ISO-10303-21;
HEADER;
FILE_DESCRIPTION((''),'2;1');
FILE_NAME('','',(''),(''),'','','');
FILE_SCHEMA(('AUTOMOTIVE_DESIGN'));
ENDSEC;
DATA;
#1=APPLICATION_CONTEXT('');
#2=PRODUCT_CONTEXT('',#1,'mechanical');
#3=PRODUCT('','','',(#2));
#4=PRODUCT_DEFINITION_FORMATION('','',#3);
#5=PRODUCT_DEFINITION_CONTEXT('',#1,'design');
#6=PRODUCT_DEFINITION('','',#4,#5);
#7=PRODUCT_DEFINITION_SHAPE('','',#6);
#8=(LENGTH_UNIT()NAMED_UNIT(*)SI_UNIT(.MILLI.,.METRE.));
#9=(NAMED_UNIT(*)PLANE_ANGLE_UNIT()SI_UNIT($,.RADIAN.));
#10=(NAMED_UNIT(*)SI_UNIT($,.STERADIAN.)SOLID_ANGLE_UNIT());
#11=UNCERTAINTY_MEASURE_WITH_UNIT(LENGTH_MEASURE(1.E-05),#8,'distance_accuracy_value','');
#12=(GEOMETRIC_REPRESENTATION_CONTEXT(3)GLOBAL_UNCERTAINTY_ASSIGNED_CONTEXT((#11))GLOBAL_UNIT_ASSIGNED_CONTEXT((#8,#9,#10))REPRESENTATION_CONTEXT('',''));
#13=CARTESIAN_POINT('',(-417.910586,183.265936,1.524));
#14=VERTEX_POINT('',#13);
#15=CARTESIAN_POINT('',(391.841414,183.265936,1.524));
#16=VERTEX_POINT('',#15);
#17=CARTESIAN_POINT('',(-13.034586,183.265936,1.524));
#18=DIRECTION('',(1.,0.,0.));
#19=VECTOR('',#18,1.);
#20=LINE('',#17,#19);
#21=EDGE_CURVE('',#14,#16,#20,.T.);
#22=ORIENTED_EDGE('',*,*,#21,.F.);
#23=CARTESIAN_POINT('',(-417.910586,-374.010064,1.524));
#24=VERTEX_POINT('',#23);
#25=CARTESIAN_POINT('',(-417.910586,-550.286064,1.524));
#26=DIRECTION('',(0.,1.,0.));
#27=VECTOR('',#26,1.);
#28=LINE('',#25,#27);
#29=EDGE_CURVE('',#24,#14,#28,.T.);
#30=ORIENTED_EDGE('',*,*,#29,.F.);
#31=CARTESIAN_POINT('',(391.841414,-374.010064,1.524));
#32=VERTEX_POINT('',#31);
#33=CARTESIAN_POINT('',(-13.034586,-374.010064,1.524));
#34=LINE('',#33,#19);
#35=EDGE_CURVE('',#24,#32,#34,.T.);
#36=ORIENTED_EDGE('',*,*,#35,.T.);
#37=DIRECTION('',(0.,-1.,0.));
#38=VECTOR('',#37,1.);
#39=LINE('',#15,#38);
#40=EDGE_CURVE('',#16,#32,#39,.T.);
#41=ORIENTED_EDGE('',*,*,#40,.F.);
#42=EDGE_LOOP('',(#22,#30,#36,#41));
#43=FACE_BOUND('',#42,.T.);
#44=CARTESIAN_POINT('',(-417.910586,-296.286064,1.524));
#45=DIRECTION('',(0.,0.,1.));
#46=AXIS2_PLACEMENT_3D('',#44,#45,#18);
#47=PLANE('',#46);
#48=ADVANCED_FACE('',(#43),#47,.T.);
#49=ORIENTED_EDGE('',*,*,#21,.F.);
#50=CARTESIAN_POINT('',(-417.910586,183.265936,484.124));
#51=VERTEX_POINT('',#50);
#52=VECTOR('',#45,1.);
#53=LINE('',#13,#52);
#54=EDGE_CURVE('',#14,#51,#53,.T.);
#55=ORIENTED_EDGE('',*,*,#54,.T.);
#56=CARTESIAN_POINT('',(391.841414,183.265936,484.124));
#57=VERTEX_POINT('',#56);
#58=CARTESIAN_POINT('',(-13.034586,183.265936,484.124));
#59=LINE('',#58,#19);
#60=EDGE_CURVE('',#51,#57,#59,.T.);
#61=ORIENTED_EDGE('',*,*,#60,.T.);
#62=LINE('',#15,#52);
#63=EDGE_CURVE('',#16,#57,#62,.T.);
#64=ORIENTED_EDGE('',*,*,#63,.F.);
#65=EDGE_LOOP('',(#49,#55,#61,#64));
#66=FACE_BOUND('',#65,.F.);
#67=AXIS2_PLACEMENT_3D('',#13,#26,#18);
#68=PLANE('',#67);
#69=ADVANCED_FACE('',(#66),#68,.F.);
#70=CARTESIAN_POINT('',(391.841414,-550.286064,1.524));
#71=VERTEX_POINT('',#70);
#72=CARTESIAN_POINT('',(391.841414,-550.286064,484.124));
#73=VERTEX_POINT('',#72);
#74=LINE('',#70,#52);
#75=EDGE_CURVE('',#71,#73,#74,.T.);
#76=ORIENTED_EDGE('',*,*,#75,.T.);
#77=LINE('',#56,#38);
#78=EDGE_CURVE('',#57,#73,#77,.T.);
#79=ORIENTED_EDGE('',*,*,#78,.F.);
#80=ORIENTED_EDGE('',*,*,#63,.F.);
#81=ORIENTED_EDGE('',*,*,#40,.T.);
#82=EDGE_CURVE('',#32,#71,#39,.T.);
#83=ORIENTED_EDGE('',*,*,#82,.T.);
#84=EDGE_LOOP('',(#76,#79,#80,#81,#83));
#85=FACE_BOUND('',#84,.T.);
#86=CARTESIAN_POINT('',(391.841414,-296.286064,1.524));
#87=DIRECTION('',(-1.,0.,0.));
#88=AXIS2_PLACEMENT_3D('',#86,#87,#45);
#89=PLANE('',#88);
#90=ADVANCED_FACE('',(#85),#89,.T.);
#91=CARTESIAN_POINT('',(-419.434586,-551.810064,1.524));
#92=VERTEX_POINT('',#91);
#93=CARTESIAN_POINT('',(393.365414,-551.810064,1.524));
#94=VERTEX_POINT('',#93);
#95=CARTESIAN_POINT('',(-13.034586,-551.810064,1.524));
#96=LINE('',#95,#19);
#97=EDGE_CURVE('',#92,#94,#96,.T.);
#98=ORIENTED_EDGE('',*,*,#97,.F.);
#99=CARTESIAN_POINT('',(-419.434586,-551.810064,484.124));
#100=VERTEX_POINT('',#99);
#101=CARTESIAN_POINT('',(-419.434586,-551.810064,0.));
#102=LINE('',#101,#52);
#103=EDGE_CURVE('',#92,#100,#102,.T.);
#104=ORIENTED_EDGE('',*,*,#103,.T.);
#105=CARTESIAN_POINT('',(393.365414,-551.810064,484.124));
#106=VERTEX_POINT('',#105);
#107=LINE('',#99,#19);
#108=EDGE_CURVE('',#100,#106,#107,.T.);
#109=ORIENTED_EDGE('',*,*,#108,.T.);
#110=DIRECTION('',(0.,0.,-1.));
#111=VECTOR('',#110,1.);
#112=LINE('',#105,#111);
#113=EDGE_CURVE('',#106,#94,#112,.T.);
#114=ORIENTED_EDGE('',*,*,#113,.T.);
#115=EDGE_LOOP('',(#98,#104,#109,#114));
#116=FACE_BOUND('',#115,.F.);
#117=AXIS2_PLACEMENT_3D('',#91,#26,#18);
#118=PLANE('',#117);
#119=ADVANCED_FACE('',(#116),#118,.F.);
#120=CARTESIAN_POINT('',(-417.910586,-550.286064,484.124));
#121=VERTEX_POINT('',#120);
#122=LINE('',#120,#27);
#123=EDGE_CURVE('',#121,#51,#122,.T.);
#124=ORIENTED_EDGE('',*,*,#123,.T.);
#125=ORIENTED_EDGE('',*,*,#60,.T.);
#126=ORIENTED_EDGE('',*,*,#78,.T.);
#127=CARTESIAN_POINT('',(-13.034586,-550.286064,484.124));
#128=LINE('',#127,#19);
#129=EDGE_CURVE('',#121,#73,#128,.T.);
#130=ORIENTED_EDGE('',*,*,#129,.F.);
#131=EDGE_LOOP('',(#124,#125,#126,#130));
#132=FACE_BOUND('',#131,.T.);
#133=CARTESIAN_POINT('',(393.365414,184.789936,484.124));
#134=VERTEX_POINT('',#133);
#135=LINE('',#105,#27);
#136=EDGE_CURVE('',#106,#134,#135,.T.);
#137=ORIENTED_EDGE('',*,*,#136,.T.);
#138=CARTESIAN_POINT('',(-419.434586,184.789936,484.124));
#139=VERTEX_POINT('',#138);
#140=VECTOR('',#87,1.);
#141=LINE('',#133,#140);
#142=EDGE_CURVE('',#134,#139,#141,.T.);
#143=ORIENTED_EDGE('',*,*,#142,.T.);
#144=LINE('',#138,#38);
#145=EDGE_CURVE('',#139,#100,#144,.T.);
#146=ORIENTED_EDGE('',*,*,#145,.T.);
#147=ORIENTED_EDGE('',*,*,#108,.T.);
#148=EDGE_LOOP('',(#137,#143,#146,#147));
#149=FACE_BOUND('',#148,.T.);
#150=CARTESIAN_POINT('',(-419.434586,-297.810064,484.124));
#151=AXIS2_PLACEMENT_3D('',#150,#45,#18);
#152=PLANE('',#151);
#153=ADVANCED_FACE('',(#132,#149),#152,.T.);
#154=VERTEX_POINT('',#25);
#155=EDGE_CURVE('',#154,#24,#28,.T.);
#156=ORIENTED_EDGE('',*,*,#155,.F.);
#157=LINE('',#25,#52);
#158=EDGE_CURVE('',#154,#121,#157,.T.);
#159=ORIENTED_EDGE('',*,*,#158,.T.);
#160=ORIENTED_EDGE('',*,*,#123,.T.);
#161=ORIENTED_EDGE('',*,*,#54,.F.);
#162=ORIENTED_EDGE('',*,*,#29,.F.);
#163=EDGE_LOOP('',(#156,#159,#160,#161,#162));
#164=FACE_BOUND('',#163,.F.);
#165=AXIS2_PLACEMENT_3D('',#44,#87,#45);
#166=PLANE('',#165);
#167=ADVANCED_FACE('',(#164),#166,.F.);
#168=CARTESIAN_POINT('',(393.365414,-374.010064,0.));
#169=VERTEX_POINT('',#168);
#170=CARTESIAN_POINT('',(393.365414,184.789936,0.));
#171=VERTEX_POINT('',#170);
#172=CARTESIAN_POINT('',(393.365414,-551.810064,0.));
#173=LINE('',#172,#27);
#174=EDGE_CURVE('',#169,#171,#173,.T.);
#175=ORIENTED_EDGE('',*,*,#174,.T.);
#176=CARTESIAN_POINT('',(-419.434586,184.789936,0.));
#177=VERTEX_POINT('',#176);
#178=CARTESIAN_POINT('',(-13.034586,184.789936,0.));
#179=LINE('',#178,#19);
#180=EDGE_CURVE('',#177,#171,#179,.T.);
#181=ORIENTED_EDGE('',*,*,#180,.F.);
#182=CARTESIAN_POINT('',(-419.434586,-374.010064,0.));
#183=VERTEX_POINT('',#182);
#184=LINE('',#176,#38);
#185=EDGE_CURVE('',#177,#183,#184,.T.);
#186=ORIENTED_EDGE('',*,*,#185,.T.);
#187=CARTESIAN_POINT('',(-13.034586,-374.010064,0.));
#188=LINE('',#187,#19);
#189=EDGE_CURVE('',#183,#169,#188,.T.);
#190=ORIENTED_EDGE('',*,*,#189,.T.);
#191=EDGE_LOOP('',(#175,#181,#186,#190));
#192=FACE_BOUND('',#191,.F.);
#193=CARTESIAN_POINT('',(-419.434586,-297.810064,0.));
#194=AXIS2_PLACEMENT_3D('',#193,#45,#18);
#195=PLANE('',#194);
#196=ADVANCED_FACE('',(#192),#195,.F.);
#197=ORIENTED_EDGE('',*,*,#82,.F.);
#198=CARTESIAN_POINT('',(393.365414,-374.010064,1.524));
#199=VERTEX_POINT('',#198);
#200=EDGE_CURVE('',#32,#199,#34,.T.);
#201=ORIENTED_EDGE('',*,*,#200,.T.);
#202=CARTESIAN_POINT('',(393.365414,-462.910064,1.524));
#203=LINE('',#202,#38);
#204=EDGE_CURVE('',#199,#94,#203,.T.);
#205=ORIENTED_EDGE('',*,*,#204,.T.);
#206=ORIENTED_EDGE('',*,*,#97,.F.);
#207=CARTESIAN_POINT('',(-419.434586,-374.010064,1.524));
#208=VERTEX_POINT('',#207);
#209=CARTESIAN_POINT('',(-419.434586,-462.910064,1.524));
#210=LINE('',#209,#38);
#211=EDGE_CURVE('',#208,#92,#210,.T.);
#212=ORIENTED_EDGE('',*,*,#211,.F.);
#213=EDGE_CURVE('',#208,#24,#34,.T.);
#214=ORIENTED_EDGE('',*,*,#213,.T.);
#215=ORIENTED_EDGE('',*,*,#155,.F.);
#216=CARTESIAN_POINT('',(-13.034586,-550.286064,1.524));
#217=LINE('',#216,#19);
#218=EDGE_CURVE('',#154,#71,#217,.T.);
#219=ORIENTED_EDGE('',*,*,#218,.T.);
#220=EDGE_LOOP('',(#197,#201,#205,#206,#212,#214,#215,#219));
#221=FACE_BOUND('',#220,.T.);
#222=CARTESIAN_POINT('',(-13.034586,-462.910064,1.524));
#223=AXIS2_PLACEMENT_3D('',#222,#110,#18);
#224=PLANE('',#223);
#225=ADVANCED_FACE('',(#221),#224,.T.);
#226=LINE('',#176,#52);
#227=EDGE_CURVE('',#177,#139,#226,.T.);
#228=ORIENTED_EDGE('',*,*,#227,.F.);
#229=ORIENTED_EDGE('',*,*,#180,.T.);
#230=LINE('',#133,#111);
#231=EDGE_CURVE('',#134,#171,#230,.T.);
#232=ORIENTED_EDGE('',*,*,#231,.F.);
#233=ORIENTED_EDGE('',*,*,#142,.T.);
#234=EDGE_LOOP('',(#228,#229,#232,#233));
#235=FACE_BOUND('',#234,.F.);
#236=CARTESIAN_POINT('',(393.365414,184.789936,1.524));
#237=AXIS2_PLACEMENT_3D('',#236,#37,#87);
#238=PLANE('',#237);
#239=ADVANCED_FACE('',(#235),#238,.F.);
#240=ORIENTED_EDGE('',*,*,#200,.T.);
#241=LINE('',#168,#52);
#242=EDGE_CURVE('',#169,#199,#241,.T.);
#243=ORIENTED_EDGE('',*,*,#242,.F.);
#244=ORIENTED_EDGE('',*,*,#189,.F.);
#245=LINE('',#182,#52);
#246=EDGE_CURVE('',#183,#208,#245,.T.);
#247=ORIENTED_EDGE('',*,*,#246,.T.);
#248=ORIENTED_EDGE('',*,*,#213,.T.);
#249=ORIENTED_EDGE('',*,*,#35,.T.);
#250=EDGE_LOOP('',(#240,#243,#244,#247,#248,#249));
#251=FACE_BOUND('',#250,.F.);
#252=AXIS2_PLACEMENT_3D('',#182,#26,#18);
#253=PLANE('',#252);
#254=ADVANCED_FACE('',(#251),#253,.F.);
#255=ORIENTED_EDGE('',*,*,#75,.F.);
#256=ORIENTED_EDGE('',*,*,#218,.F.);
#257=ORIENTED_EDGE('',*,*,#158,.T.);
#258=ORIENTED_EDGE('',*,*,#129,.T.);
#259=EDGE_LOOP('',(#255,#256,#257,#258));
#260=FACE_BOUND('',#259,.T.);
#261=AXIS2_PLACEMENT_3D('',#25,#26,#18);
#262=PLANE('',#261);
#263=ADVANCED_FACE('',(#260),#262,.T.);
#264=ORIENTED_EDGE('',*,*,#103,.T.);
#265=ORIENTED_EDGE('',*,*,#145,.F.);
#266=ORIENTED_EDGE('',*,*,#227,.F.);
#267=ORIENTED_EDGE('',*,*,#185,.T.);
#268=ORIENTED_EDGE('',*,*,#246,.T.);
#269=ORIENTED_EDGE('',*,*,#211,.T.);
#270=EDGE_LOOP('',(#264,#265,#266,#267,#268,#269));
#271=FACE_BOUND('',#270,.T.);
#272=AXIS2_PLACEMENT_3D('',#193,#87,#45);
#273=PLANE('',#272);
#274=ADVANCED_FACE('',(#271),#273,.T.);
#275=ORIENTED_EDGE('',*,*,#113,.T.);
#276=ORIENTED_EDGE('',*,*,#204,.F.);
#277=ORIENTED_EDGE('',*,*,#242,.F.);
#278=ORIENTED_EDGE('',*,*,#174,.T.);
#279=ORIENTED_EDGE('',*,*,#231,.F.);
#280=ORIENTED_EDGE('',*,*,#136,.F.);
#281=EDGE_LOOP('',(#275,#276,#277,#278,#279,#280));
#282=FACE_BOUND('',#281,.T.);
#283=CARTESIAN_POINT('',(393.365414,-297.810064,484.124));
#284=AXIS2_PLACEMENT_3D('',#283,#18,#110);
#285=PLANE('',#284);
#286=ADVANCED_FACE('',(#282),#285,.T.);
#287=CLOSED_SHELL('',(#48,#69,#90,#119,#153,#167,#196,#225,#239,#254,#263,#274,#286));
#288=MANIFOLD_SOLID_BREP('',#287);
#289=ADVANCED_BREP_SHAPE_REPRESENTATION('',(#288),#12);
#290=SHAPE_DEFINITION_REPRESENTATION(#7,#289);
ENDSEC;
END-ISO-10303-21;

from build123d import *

# Parameters (mm, degrees)
F0_W     = 812.8
F0_H     = 482.6
F1_DEPTH = 1.524
F2_W     = 809.752
F2_H     = 1.524
F3_DEPTH = 482.6
F4_DEPTH = 254
F5_DEPTH = 254
F6_W     = 812.8
F6_H     = 177.8
F7_DEPTH = 1.524


with BuildPart() as f1:
    # F0 (on Top) → F1 (new body)
    with BuildSketch(Plane.XY):
        with Locations((-13.0345858634, -56.5100638679)):
            Rectangle(F0_W, F0_H)
    extrude(amount=F1_DEPTH)

    # F2 (on face) → F3 (join)
    with BuildSketch(Plane.XY.offset(1.524)):
        Polygon((393.3654141366, 184.7899361321), (391.8414141366, 184.7899361321), (391.8414141366, 183.2659361321), (391.8414141366, -296.2860638679), (391.8414141366, -297.8100638679), (393.3654141366, -297.8100638679), align=None)
        with Locations((-13.0345858634, 184.0279361321)):
            Rectangle(F2_W, F2_H)
        with Locations((-13.0345858634, -297.0480638679)):
            Rectangle(F2_W, F2_H)
        Polygon((-417.9105858634, 184.7899361321), (-419.4345858634, 184.7899361321), (-419.4345858634, -297.8100638679), (-417.9105858634, -297.8100638679), (-417.9105858634, -296.2860638679), (-417.9105858634, 183.2659361321), align=None)
    extrude(amount=F3_DEPTH)

    # F4 (add): a face of the model
    f4_faces = [f1.faces().sort_by_distance(p)[0] for p in [
        (-13.0345858634, -297.8100638679, 242.062),
    ]]
    extrude(f4_faces, amount=F4_DEPTH)

    # F5 (cut): a face of the model
    f5_faces = [f1.faces().sort_by_distance(p)[0] for p in [
        (-13.0345858634, -296.2860638679, 242.824),
    ]]
    extrude(f5_faces, amount=-F5_DEPTH, mode=Mode.SUBTRACT)

    # F6 (on face) → F7 (cut)
    with BuildSketch(Plane(origin=(0, 0, 0), x_dir=(1, 0, 0), z_dir=(0, 0, -1))):
        with Locations((-13.0345858634, 462.9100638679)):
            Rectangle(F6_W, F6_H)
    extrude(amount=-F7_DEPTH, mode=Mode.SUBTRACT)


solid = f1.part
